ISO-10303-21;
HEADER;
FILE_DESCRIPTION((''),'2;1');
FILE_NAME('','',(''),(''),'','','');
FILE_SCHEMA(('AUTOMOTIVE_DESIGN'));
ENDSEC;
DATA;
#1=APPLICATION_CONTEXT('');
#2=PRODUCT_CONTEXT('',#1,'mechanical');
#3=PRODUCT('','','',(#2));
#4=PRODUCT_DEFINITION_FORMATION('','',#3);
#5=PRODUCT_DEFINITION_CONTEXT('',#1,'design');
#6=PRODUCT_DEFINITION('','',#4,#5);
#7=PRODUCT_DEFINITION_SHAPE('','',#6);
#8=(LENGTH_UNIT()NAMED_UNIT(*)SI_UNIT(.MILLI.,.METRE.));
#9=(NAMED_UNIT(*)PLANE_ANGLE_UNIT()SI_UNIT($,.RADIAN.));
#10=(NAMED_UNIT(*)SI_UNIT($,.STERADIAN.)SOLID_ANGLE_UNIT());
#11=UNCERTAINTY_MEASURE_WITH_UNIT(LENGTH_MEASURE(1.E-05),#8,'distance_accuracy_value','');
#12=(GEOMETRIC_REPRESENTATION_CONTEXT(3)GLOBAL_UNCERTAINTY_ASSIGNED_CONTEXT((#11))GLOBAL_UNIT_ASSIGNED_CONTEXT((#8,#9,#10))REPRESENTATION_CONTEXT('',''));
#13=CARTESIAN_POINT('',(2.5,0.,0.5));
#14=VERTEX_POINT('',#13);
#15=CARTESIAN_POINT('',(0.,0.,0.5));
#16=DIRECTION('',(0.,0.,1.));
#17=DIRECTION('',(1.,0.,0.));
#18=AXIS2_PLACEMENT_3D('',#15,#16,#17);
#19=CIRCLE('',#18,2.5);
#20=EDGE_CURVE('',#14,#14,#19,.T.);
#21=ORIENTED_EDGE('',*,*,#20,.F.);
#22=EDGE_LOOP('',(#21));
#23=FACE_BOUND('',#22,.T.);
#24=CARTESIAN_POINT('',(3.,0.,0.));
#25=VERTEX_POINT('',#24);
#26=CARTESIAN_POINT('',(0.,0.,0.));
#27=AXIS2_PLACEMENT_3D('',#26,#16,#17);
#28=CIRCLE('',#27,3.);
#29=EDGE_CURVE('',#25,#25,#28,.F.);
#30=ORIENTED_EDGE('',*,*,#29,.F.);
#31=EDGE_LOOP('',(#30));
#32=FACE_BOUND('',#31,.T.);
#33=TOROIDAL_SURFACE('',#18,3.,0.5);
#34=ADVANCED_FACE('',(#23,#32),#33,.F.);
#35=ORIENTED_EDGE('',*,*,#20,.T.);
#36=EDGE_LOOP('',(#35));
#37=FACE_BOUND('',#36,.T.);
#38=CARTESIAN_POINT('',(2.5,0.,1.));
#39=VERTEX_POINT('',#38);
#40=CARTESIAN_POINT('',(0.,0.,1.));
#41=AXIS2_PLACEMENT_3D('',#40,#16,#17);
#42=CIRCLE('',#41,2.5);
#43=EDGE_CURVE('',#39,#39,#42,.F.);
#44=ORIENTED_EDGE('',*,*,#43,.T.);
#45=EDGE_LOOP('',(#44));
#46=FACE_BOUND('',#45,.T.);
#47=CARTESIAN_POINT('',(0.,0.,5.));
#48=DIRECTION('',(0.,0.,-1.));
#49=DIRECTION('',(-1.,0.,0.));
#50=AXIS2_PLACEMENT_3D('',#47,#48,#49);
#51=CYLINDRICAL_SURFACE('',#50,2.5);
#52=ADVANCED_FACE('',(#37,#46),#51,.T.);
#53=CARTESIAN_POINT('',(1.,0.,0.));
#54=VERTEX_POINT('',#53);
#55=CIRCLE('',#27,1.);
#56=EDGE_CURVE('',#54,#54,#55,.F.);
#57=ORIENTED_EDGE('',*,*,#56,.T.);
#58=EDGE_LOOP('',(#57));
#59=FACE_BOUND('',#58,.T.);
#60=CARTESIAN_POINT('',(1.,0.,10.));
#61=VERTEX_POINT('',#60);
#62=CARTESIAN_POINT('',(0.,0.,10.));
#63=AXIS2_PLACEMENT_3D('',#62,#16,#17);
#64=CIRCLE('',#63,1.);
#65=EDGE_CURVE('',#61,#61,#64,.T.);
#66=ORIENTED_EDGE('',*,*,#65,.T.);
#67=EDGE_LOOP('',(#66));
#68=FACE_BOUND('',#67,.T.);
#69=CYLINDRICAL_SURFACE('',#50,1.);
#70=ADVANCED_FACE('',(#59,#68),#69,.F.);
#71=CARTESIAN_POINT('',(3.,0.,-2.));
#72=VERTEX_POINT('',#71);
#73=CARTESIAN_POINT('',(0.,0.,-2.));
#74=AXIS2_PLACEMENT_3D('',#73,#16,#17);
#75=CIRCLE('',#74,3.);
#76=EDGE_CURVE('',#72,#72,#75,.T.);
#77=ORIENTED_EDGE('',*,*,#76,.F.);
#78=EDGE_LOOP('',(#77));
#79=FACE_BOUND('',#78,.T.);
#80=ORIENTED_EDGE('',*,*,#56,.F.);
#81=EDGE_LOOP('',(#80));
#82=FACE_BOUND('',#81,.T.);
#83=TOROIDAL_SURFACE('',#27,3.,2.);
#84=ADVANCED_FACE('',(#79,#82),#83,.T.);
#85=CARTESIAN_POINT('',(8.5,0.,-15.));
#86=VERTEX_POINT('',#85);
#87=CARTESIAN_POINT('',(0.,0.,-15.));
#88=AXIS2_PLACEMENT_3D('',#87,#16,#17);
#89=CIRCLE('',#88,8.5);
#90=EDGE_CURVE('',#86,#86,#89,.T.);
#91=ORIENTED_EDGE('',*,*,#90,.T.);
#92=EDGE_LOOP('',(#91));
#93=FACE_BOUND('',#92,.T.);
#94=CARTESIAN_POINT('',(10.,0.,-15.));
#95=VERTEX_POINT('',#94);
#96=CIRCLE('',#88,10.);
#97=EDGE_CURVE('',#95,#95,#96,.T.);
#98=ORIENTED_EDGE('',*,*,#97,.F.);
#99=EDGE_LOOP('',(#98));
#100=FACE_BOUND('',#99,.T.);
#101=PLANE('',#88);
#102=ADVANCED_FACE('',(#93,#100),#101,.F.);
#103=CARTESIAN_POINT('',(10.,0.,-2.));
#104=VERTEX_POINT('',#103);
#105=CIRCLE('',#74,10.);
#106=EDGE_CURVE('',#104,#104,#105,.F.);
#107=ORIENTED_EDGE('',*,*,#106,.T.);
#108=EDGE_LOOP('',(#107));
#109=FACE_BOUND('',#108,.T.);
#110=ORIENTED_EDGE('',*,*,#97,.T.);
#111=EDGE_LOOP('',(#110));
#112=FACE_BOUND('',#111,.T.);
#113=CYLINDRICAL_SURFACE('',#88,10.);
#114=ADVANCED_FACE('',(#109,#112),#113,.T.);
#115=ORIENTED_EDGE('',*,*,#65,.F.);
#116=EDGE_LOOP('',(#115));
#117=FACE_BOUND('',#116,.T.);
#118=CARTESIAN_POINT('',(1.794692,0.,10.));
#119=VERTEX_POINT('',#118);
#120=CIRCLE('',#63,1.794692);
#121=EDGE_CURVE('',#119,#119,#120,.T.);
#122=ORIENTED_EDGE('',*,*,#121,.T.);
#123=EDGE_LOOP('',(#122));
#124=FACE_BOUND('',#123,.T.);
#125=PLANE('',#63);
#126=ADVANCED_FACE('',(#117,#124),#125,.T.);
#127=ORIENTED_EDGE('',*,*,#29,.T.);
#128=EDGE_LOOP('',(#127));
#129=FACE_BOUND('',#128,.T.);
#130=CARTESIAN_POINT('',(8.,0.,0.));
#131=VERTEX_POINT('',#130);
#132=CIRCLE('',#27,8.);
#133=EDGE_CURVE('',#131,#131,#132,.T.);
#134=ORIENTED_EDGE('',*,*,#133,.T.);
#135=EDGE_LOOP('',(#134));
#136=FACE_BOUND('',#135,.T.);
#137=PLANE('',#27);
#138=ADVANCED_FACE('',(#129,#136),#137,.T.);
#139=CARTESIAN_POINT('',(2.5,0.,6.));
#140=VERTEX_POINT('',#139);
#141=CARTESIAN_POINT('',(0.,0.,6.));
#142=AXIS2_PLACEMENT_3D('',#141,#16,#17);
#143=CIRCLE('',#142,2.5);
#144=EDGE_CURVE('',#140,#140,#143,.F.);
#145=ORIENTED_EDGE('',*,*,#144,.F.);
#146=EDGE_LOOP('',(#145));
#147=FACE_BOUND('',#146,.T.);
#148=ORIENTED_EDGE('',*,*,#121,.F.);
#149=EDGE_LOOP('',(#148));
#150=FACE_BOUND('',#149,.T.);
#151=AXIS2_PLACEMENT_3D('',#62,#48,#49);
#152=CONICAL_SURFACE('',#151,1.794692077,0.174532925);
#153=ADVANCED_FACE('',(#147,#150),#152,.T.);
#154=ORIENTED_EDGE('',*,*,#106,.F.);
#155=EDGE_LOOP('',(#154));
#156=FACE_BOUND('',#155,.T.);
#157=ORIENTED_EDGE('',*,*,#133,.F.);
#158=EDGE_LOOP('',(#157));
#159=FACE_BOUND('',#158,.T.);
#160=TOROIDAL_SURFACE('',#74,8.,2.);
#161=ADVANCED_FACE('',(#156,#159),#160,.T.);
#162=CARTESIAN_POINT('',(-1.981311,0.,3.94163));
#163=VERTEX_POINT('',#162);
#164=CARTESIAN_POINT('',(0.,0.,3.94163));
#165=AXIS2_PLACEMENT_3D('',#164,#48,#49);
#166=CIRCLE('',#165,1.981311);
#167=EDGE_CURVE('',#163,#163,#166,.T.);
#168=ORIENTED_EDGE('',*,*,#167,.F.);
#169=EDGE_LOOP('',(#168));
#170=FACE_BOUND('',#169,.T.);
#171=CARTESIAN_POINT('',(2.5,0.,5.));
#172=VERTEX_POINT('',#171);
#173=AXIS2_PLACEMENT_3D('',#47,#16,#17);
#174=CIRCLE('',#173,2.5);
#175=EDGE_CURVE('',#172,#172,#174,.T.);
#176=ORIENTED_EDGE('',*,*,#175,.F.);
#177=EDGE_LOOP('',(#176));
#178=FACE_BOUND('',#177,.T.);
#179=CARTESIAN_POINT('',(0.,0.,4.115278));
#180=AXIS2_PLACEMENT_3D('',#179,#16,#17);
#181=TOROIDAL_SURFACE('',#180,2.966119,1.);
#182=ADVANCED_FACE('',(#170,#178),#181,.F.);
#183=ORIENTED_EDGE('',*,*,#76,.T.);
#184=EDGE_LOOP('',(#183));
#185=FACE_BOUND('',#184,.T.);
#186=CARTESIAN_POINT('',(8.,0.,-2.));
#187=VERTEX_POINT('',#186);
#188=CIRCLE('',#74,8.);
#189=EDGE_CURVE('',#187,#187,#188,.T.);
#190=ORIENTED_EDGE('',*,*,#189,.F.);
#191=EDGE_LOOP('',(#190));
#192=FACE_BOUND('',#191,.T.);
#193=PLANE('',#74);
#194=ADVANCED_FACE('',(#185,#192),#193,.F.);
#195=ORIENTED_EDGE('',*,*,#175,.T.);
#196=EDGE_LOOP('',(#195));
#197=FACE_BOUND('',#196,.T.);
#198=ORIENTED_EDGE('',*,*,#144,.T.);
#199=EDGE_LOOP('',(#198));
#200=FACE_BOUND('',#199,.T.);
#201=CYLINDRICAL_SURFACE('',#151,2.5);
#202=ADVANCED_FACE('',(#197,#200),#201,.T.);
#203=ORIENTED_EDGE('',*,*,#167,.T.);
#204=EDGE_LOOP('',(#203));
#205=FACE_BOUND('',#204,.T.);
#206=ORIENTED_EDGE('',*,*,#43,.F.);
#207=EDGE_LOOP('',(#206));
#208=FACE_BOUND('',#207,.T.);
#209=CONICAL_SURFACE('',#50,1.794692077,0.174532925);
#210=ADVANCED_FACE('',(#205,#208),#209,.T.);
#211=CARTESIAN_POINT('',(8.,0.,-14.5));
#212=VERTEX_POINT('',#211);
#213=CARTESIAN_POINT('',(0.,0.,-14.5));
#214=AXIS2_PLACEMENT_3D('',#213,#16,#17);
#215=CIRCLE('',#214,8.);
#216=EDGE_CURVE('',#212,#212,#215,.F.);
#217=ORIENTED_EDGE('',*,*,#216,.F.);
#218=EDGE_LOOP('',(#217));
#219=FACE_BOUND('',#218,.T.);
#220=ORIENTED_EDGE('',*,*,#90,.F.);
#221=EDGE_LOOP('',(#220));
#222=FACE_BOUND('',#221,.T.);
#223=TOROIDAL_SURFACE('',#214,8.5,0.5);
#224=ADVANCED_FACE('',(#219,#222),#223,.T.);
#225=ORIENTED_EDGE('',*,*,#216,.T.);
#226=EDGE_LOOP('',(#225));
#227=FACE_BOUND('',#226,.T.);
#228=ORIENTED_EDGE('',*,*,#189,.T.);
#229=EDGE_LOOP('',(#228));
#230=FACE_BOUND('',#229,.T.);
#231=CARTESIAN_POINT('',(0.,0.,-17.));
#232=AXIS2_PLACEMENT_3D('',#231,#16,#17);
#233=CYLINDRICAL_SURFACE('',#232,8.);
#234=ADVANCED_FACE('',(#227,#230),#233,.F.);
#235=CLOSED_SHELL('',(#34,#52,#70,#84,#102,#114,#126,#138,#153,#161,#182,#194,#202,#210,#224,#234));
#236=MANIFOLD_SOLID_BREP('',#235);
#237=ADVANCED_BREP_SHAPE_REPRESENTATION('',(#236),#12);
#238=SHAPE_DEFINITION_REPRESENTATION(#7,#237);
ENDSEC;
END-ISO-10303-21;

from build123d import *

# Parameters (mm, degrees)
SKETCH1_R                   = 2.5
SKETCH1_R_2                 = 1
BOSS_EXTRUDE1_DEPTH         = 5
CHAMFER2_SIZE               = 4
CHAMFER2_SIZE2              = 0.705307923
LPATTERN2_COUNT             = 2
LPATTERN2_PITCH             = 5
CHAMFER2_OF_LPATTERN2_SIZE2 = 0.705307923
CHAMFER2_OF_LPATTERN2_SIZE  = 4
FILLET1_R                   = 1
SKETCH2_R                   = 10
BOSS_EXTRUDE2_DEPTH         = 15
CUT_EXTRUDE1_START          = -2
SKETCH3_R                   = 8
CUT_EXTRUDE1_DEPTH          = 15
CUT_EXTRUDE2_START          = -15
SKETCH4_R                   = 1
CUT_EXTRUDE2_DEPTH          = 15
FILLET2_R                   = 2
FILLET3_R                   = 2
FILLET4_R                   = 0.5
FILLET5_R                   = 0.5


with BuildPart() as part:
    # Sketch1 → Boss-Extrude1 (new body)
    with BuildSketch(Plane.XY):
        Circle(SKETCH1_R)
        Circle(SKETCH1_R_2, mode=Mode.SUBTRACT)
    boss_extrude1 = extrude(amount=BOSS_EXTRUDE1_DEPTH)

    # Chamfer2
    chamfer2_edges = [part.edges().sort_by_distance(p)[0] for p in [
        (-2.5, 0, 5),
    ]]
    chamfer2_side = [part.faces().sort_by_distance(p)[0] for p in [
        (-2.5, 0, 2.5),
    ]]
    chamfer(chamfer2_edges, length=CHAMFER2_SIZE, length2=CHAMFER2_SIZE2, reference=chamfer2_side[0])


with BuildPart() as lpattern2_1:
    # LPattern2: Boss-Extrude1 ×2
    with Locations(*[(0, 0, i * LPATTERN2_PITCH) for i in range(1, LPATTERN2_COUNT)]):
        add(boss_extrude1)

    # Chamfer2 of LPattern2
    chamfer2_of_lpattern2_edges = [lpattern2_1.edges().sort_by_distance(p)[0] for p in [
        (-2.5, 0, 10),
    ]]
    chamfer(chamfer2_of_lpattern2_edges, length=CHAMFER2_OF_LPATTERN2_SIZE, length2=CHAMFER2_OF_LPATTERN2_SIZE2)


with BuildPart() as part_1:
    add(part.part)

    # LPattern2 united with what the copies to: union LPattern2_1
    add(lpattern2_1.part)

    # Fillet1
    # the kernel refuses this fillet: 1 mm, written as the material it adds along each edge
    with BuildSketch(Plane(origin=(0, 0, 5), x_dir=(1, 0, 0), z_dir=(0, -1, 0))) as fillet1_piece_1:
        with BuildLine():
            CenterArc((2.96611905, -0.884722008), FILLET1_R, 117.782669079, 72.217330921)
            Line((1.981311297, -1.058370186), (1.961615141, -1.061843149))
            Line((1.961615141, -1.061843149), (1.774995922, -0.003472964))
            Line((1.774995922, -0.003472964), (1.794692077, 0.02))
            ThreePointArc((1.794692077, 0.02), (2.147346039, 0.02), (2.490677619, 0.01769444))
            Line((2.490677619, 0.01769444), (2.5, 0))
        make_face()
    revolve(axis=Axis((0, 0, 5), (0, 0, 1)))

    # Sketch2 → Boss-Extrude2 (add)
    with BuildSketch(Plane.XY):
        Circle(SKETCH2_R)
    extrude(amount=-BOSS_EXTRUDE2_DEPTH)

    # Sketch3 → Cut-Extrude1 (cut)
    with BuildSketch(Plane.XY.offset(CUT_EXTRUDE1_START)):
        Circle(SKETCH3_R)
    extrude(amount=-CUT_EXTRUDE1_DEPTH, mode=Mode.SUBTRACT)

    # Sketch4 → Cut-Extrude2 (cut)
    with BuildSketch(Plane.XY.offset(CUT_EXTRUDE2_START)):
        Circle(SKETCH4_R)
    extrude(amount=CUT_EXTRUDE2_DEPTH, mode=Mode.SUBTRACT)

    # Fillet2
    fillet2_edges = [part_1.edges().sort_by_distance(p)[0] for p in [
        (-1, 0, -2),
    ]]
    fillet(fillet2_edges, radius=FILLET2_R)

    # Fillet3
    fillet3_edges = [part_1.edges().sort_by_distance(p)[0] for p in [
        (-10, 0, 0),
    ]]
    fillet(fillet3_edges, radius=FILLET3_R)

    # Fillet4
    fillet4_edges = [part_1.edges().sort_by_distance(p)[0] for p in [
        (-2.5, 0, 0),
    ]]
    fillet(fillet4_edges, radius=FILLET4_R)

    # Fillet5
    fillet5_edges = [part_1.edges().sort_by_distance(p)[0] for p in [
        (-8, 0, -15),
    ]]
    fillet(fillet5_edges, radius=FILLET5_R)


solid = part_1.part
